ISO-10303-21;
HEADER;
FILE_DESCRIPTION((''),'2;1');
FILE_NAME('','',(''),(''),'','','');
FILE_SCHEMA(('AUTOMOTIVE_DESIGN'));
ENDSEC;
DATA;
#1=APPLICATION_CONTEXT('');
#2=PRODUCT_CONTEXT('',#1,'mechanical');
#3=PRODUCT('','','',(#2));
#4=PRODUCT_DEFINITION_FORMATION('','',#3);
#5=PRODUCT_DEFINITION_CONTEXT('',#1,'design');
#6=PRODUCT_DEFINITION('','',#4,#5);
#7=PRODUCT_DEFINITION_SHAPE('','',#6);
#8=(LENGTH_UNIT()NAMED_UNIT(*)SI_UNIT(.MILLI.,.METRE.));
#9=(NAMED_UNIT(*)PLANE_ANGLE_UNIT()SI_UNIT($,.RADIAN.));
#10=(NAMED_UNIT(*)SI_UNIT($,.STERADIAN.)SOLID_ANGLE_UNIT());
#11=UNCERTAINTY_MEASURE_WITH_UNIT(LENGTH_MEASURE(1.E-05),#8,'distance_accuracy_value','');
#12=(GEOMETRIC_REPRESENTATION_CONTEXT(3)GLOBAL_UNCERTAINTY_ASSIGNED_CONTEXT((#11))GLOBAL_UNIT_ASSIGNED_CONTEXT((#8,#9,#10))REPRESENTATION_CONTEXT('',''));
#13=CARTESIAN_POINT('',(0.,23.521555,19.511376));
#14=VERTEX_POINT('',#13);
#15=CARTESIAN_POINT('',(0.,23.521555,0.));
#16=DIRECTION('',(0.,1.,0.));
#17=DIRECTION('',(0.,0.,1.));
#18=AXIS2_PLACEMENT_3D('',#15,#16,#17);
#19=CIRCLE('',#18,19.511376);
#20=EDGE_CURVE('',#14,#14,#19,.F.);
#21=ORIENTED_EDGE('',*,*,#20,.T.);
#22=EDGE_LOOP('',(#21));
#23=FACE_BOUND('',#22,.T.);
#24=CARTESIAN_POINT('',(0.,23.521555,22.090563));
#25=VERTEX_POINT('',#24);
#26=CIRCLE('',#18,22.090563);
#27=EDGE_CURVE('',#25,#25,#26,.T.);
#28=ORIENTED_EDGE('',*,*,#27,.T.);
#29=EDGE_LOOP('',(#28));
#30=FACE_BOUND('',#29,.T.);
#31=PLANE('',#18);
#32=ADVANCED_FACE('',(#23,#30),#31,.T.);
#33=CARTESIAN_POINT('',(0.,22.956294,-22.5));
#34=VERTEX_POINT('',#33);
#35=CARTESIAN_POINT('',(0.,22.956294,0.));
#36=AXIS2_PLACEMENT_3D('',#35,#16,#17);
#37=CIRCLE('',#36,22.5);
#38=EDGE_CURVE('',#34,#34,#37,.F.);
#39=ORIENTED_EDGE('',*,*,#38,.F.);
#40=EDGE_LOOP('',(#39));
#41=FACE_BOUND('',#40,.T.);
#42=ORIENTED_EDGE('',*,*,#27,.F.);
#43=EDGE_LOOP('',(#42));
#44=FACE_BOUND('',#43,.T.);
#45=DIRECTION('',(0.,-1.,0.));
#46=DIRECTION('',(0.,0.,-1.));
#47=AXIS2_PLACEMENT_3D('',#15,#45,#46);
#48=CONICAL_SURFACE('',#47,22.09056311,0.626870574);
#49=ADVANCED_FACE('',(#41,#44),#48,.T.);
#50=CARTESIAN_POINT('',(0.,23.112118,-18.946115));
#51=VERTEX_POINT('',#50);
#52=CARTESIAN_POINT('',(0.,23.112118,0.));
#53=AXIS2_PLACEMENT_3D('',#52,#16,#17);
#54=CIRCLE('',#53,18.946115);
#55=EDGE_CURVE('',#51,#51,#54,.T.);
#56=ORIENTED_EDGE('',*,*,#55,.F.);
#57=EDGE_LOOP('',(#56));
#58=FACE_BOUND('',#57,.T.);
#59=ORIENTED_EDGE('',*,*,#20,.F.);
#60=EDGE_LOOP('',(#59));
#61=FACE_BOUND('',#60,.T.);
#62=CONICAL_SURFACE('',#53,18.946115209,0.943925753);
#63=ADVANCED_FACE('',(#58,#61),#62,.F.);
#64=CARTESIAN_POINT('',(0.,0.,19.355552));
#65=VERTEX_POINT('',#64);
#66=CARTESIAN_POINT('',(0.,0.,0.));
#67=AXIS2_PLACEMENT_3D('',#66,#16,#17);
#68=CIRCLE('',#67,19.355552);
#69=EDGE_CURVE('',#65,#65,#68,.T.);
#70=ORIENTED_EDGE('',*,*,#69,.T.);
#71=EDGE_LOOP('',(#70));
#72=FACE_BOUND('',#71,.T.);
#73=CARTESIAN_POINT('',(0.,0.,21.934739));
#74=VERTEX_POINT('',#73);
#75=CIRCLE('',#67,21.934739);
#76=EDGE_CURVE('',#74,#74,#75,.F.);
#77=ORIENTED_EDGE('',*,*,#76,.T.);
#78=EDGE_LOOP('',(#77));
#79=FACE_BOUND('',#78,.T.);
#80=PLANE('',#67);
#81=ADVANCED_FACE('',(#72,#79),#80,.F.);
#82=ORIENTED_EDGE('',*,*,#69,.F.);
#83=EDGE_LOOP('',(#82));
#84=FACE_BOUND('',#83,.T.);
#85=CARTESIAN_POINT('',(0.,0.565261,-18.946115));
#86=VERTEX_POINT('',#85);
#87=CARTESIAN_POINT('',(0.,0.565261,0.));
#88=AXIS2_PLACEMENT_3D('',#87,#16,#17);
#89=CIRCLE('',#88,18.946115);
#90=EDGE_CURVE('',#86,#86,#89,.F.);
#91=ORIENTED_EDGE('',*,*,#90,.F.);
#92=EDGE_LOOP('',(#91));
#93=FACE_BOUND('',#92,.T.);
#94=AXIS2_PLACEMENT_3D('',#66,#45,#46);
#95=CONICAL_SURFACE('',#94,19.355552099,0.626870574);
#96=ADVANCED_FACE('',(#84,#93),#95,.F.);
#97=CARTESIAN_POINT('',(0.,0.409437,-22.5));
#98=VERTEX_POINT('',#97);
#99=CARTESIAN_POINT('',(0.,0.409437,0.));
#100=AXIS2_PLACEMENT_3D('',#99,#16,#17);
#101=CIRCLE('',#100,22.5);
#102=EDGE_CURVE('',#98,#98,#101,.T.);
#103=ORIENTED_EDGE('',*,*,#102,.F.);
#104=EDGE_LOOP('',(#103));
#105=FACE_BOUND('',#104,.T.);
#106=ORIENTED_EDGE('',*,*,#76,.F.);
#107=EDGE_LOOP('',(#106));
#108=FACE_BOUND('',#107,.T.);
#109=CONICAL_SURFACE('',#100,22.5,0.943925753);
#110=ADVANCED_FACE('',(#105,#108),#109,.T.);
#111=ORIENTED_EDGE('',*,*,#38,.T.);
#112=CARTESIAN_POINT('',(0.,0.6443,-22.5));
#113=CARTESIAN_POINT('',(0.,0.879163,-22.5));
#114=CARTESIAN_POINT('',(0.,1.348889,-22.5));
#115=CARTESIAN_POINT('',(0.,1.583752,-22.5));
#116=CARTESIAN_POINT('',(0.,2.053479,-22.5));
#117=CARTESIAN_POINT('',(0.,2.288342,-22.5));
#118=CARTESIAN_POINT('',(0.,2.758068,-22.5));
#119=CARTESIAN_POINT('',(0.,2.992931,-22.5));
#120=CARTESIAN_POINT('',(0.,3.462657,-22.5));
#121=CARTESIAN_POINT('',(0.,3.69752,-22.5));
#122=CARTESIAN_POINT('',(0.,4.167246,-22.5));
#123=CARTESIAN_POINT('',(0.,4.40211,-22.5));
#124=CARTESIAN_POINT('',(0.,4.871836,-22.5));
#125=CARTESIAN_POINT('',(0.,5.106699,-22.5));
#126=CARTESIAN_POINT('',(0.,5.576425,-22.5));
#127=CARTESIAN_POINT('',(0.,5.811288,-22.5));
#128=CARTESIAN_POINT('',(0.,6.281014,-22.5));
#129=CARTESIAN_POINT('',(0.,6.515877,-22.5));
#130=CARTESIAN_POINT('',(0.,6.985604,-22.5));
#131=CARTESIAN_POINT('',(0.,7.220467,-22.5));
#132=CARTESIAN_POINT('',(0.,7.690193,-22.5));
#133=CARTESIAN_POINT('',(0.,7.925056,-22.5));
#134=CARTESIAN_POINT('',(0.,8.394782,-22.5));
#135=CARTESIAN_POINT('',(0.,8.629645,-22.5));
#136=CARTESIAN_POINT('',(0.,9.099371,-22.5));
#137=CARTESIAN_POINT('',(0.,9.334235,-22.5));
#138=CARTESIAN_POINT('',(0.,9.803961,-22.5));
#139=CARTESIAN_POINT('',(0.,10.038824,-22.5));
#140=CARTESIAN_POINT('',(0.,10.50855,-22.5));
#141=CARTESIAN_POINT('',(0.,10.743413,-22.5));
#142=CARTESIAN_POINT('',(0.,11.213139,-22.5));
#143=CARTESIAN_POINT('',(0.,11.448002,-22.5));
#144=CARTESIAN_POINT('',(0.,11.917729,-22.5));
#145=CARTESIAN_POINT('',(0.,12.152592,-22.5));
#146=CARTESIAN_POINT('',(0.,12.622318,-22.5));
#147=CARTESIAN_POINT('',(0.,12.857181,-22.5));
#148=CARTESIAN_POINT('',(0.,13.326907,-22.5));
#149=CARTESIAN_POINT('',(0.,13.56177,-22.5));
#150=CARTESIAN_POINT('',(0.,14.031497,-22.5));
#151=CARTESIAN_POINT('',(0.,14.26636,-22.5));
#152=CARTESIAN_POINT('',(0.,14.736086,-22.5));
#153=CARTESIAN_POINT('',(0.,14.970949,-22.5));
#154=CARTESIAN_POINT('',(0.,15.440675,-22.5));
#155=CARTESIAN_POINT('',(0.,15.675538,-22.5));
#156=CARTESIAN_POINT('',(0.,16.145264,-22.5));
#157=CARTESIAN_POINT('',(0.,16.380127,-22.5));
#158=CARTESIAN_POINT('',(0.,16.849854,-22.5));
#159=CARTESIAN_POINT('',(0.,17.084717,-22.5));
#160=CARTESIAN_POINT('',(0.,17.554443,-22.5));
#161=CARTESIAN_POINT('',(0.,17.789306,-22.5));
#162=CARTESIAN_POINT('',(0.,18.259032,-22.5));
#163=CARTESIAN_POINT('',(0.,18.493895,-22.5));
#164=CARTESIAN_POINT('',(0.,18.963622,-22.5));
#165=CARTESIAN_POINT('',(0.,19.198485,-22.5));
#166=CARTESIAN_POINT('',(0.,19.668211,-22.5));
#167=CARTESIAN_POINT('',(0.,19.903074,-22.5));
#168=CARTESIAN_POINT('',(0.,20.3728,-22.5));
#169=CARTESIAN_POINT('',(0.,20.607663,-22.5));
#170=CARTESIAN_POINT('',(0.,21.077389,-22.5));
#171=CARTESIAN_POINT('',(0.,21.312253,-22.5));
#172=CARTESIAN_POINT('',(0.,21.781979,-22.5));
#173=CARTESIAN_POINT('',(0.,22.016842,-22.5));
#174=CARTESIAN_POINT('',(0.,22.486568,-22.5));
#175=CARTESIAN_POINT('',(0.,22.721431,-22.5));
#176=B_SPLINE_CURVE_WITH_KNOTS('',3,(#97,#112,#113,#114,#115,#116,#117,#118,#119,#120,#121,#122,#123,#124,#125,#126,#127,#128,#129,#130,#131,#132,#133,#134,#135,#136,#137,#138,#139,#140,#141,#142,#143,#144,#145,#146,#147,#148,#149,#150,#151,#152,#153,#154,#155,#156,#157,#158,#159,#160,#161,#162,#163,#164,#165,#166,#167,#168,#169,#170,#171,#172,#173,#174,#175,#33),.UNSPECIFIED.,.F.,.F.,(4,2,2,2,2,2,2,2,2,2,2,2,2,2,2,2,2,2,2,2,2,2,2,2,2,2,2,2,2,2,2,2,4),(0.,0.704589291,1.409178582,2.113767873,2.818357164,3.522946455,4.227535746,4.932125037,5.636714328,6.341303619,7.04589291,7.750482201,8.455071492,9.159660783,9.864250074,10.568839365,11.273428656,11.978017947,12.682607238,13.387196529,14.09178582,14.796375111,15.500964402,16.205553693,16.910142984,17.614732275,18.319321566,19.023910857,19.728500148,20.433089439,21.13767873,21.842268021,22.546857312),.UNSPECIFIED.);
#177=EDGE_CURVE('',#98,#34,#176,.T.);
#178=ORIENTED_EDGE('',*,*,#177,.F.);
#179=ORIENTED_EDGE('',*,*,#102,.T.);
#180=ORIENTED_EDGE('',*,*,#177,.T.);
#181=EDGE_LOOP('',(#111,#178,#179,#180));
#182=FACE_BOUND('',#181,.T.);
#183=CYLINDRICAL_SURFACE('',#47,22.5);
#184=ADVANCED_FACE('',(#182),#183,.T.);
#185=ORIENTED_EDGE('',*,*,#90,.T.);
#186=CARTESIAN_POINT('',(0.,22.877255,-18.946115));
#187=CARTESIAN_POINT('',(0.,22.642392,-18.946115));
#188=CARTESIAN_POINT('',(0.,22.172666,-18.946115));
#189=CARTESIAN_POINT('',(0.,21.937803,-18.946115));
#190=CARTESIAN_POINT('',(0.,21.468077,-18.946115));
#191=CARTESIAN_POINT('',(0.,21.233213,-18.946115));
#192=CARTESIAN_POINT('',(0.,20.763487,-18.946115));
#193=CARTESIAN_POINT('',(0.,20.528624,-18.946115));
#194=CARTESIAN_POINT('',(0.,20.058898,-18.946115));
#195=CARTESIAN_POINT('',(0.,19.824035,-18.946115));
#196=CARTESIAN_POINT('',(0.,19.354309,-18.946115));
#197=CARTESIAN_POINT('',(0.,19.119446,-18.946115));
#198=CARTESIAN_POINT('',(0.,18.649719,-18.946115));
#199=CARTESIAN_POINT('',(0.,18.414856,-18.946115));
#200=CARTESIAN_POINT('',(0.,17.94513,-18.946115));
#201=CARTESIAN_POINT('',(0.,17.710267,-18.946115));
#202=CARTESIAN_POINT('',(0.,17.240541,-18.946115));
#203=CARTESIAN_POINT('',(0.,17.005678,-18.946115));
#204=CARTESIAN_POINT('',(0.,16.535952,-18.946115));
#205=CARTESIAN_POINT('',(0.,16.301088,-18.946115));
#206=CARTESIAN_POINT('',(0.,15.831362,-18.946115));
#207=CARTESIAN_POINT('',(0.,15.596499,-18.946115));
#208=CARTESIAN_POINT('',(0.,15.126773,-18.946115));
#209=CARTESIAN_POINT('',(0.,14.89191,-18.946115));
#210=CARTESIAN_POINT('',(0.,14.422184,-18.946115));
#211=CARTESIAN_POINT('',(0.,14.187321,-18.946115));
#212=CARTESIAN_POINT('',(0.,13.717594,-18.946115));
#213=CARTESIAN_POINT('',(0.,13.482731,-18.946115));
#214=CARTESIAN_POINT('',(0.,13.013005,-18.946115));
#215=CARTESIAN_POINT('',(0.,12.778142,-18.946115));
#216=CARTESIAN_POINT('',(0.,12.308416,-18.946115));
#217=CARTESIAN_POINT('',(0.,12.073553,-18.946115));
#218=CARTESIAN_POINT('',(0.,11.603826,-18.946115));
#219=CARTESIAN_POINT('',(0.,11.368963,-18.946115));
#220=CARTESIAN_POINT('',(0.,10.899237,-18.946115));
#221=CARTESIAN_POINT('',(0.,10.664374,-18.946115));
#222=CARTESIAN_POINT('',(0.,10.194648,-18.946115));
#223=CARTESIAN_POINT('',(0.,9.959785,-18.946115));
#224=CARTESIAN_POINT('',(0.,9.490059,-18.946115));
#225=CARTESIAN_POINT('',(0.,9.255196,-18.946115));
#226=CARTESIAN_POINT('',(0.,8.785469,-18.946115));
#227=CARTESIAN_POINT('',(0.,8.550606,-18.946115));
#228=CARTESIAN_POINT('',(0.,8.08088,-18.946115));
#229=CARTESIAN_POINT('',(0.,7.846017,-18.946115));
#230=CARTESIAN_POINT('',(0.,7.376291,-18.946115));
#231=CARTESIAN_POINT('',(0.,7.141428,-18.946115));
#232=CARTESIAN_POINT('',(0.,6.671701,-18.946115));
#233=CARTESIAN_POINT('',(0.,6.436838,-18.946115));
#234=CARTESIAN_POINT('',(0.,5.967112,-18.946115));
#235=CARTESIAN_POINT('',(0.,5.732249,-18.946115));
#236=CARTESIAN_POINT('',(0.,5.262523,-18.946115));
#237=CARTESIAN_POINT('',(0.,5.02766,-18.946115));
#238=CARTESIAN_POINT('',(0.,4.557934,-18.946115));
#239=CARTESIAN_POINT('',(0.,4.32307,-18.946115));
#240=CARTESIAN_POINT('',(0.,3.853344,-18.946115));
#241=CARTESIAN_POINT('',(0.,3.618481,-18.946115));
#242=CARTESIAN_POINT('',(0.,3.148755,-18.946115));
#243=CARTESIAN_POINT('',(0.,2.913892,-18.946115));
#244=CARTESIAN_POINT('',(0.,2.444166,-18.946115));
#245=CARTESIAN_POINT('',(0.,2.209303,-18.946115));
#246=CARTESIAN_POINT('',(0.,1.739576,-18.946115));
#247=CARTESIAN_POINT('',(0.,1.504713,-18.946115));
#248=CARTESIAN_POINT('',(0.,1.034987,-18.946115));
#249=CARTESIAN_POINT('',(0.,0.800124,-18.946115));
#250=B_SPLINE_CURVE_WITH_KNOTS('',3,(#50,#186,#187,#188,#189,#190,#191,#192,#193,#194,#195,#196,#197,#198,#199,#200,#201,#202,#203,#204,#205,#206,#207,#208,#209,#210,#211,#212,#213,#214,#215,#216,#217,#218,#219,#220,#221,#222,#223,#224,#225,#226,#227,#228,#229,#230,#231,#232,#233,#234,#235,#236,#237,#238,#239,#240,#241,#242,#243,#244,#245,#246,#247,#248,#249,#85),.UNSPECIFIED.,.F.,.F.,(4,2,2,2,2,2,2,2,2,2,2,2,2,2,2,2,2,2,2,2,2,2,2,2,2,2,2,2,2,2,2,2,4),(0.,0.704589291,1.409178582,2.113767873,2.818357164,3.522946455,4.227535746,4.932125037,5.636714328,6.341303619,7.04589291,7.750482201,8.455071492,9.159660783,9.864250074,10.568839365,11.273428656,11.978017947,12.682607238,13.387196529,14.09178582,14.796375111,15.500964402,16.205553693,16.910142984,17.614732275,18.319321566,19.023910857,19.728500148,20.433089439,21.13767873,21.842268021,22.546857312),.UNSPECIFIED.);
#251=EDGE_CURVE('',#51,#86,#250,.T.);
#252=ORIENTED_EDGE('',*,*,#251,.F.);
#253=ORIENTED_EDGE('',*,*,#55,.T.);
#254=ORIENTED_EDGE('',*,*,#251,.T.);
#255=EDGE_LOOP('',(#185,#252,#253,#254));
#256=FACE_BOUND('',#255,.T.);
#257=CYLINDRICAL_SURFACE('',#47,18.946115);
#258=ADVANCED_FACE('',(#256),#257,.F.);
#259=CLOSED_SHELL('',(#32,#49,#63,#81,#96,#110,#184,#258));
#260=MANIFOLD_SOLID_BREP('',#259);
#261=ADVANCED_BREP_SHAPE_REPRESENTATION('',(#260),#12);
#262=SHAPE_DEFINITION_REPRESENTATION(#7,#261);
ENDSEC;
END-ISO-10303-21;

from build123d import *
from OCP.BRepFilletAPI import BRepFilletAPI_MakeChamfer

# Parameters (mm, degrees)
SKETCH1_R           = 22.5
BOSS_EXTRUDE1_DEPTH = 23.521555114
SKETCH2_R           = 18.946115209
CUT_EXTRUDE1_DEPTH  = 40.569730287
CHAMFER1_SIZE       = 0.565260912
CHAMFER1_SIZE2      = 0.40943689


with BuildPart() as part:
    # Sketch1 → Boss-Extrude1 (new body)
    with BuildSketch(Plane(origin=(0, 0, 0), x_dir=(1, 0, 0), z_dir=(0, 1, 0))):
        Circle(SKETCH1_R)
    extrude(amount=BOSS_EXTRUDE1_DEPTH)

    # Sketch2 → Cut-Extrude1 (cut, through all)
    with BuildSketch(Plane(origin=(0, 0, 0), x_dir=(1, 0, 0), z_dir=(0, 1, 0))):
        Circle(SKETCH2_R)
    extrude(amount=CUT_EXTRUDE1_DEPTH, mode=Mode.SUBTRACT)

    # Chamfer1: one chamfer whose edges measure the first distance from different faces: ONE call of the kernel's chamfer builder (chamfer() names one face for all edges)
    chamfer1_edges_1 = [part.edges().sort_by_distance(p)[0] for p in [
        (-18.946115209, 23.521555114, 0),
    ]]
    chamfer1_side_1 = [part.faces().sort_by_distance(p)[0] for p in [
        (-21.863603897, 23.521555114, 0),
    ]]
    chamfer1_edges_2 = [part.edges().sort_by_distance(p)[0] for p in [
        (-18.946115209, 0, 0),
    ]]
    chamfer1_side_2 = [part.faces().sort_by_distance(p)[0] for p in [
        (-18.946115209, 11.760777557, 0),
    ]]
    chamfer1_edges_3 = [part.edges().sort_by_distance(p)[0] for p in [
        (-22.5, 0, 0),
    ]]
    chamfer1_side_3 = [part.faces().sort_by_distance(p)[0] for p in [
        (-21.863603897, 0, 0),
    ]]
    chamfer1_edges_4 = [part.edges().sort_by_distance(p)[0] for p in [
        (-22.5, 23.521555114, 0),
    ]]
    chamfer1_side_4 = [part.faces().sort_by_distance(p)[0] for p in [
        (-22.5, 11.760777557, 0),
    ]]
    chamfer1 = BRepFilletAPI_MakeChamfer(part.part.solid().wrapped)
    for e in chamfer1_edges_1:
        chamfer1.Add(CHAMFER1_SIZE, CHAMFER1_SIZE2, e.wrapped, chamfer1_side_1[0].wrapped)  # the first distance lies on this face
    for e in chamfer1_edges_2:
        chamfer1.Add(CHAMFER1_SIZE, CHAMFER1_SIZE2, e.wrapped, chamfer1_side_2[0].wrapped)  # the first distance lies on this face
    for e in chamfer1_edges_3:
        chamfer1.Add(CHAMFER1_SIZE, CHAMFER1_SIZE2, e.wrapped, chamfer1_side_3[0].wrapped)  # the first distance lies on this face
    for e in chamfer1_edges_4:
        chamfer1.Add(CHAMFER1_SIZE, CHAMFER1_SIZE2, e.wrapped, chamfer1_side_4[0].wrapped)  # the first distance lies on this face
    add(Compound.cast(chamfer1.Shape()), mode=Mode.REPLACE)


solid = part.part
